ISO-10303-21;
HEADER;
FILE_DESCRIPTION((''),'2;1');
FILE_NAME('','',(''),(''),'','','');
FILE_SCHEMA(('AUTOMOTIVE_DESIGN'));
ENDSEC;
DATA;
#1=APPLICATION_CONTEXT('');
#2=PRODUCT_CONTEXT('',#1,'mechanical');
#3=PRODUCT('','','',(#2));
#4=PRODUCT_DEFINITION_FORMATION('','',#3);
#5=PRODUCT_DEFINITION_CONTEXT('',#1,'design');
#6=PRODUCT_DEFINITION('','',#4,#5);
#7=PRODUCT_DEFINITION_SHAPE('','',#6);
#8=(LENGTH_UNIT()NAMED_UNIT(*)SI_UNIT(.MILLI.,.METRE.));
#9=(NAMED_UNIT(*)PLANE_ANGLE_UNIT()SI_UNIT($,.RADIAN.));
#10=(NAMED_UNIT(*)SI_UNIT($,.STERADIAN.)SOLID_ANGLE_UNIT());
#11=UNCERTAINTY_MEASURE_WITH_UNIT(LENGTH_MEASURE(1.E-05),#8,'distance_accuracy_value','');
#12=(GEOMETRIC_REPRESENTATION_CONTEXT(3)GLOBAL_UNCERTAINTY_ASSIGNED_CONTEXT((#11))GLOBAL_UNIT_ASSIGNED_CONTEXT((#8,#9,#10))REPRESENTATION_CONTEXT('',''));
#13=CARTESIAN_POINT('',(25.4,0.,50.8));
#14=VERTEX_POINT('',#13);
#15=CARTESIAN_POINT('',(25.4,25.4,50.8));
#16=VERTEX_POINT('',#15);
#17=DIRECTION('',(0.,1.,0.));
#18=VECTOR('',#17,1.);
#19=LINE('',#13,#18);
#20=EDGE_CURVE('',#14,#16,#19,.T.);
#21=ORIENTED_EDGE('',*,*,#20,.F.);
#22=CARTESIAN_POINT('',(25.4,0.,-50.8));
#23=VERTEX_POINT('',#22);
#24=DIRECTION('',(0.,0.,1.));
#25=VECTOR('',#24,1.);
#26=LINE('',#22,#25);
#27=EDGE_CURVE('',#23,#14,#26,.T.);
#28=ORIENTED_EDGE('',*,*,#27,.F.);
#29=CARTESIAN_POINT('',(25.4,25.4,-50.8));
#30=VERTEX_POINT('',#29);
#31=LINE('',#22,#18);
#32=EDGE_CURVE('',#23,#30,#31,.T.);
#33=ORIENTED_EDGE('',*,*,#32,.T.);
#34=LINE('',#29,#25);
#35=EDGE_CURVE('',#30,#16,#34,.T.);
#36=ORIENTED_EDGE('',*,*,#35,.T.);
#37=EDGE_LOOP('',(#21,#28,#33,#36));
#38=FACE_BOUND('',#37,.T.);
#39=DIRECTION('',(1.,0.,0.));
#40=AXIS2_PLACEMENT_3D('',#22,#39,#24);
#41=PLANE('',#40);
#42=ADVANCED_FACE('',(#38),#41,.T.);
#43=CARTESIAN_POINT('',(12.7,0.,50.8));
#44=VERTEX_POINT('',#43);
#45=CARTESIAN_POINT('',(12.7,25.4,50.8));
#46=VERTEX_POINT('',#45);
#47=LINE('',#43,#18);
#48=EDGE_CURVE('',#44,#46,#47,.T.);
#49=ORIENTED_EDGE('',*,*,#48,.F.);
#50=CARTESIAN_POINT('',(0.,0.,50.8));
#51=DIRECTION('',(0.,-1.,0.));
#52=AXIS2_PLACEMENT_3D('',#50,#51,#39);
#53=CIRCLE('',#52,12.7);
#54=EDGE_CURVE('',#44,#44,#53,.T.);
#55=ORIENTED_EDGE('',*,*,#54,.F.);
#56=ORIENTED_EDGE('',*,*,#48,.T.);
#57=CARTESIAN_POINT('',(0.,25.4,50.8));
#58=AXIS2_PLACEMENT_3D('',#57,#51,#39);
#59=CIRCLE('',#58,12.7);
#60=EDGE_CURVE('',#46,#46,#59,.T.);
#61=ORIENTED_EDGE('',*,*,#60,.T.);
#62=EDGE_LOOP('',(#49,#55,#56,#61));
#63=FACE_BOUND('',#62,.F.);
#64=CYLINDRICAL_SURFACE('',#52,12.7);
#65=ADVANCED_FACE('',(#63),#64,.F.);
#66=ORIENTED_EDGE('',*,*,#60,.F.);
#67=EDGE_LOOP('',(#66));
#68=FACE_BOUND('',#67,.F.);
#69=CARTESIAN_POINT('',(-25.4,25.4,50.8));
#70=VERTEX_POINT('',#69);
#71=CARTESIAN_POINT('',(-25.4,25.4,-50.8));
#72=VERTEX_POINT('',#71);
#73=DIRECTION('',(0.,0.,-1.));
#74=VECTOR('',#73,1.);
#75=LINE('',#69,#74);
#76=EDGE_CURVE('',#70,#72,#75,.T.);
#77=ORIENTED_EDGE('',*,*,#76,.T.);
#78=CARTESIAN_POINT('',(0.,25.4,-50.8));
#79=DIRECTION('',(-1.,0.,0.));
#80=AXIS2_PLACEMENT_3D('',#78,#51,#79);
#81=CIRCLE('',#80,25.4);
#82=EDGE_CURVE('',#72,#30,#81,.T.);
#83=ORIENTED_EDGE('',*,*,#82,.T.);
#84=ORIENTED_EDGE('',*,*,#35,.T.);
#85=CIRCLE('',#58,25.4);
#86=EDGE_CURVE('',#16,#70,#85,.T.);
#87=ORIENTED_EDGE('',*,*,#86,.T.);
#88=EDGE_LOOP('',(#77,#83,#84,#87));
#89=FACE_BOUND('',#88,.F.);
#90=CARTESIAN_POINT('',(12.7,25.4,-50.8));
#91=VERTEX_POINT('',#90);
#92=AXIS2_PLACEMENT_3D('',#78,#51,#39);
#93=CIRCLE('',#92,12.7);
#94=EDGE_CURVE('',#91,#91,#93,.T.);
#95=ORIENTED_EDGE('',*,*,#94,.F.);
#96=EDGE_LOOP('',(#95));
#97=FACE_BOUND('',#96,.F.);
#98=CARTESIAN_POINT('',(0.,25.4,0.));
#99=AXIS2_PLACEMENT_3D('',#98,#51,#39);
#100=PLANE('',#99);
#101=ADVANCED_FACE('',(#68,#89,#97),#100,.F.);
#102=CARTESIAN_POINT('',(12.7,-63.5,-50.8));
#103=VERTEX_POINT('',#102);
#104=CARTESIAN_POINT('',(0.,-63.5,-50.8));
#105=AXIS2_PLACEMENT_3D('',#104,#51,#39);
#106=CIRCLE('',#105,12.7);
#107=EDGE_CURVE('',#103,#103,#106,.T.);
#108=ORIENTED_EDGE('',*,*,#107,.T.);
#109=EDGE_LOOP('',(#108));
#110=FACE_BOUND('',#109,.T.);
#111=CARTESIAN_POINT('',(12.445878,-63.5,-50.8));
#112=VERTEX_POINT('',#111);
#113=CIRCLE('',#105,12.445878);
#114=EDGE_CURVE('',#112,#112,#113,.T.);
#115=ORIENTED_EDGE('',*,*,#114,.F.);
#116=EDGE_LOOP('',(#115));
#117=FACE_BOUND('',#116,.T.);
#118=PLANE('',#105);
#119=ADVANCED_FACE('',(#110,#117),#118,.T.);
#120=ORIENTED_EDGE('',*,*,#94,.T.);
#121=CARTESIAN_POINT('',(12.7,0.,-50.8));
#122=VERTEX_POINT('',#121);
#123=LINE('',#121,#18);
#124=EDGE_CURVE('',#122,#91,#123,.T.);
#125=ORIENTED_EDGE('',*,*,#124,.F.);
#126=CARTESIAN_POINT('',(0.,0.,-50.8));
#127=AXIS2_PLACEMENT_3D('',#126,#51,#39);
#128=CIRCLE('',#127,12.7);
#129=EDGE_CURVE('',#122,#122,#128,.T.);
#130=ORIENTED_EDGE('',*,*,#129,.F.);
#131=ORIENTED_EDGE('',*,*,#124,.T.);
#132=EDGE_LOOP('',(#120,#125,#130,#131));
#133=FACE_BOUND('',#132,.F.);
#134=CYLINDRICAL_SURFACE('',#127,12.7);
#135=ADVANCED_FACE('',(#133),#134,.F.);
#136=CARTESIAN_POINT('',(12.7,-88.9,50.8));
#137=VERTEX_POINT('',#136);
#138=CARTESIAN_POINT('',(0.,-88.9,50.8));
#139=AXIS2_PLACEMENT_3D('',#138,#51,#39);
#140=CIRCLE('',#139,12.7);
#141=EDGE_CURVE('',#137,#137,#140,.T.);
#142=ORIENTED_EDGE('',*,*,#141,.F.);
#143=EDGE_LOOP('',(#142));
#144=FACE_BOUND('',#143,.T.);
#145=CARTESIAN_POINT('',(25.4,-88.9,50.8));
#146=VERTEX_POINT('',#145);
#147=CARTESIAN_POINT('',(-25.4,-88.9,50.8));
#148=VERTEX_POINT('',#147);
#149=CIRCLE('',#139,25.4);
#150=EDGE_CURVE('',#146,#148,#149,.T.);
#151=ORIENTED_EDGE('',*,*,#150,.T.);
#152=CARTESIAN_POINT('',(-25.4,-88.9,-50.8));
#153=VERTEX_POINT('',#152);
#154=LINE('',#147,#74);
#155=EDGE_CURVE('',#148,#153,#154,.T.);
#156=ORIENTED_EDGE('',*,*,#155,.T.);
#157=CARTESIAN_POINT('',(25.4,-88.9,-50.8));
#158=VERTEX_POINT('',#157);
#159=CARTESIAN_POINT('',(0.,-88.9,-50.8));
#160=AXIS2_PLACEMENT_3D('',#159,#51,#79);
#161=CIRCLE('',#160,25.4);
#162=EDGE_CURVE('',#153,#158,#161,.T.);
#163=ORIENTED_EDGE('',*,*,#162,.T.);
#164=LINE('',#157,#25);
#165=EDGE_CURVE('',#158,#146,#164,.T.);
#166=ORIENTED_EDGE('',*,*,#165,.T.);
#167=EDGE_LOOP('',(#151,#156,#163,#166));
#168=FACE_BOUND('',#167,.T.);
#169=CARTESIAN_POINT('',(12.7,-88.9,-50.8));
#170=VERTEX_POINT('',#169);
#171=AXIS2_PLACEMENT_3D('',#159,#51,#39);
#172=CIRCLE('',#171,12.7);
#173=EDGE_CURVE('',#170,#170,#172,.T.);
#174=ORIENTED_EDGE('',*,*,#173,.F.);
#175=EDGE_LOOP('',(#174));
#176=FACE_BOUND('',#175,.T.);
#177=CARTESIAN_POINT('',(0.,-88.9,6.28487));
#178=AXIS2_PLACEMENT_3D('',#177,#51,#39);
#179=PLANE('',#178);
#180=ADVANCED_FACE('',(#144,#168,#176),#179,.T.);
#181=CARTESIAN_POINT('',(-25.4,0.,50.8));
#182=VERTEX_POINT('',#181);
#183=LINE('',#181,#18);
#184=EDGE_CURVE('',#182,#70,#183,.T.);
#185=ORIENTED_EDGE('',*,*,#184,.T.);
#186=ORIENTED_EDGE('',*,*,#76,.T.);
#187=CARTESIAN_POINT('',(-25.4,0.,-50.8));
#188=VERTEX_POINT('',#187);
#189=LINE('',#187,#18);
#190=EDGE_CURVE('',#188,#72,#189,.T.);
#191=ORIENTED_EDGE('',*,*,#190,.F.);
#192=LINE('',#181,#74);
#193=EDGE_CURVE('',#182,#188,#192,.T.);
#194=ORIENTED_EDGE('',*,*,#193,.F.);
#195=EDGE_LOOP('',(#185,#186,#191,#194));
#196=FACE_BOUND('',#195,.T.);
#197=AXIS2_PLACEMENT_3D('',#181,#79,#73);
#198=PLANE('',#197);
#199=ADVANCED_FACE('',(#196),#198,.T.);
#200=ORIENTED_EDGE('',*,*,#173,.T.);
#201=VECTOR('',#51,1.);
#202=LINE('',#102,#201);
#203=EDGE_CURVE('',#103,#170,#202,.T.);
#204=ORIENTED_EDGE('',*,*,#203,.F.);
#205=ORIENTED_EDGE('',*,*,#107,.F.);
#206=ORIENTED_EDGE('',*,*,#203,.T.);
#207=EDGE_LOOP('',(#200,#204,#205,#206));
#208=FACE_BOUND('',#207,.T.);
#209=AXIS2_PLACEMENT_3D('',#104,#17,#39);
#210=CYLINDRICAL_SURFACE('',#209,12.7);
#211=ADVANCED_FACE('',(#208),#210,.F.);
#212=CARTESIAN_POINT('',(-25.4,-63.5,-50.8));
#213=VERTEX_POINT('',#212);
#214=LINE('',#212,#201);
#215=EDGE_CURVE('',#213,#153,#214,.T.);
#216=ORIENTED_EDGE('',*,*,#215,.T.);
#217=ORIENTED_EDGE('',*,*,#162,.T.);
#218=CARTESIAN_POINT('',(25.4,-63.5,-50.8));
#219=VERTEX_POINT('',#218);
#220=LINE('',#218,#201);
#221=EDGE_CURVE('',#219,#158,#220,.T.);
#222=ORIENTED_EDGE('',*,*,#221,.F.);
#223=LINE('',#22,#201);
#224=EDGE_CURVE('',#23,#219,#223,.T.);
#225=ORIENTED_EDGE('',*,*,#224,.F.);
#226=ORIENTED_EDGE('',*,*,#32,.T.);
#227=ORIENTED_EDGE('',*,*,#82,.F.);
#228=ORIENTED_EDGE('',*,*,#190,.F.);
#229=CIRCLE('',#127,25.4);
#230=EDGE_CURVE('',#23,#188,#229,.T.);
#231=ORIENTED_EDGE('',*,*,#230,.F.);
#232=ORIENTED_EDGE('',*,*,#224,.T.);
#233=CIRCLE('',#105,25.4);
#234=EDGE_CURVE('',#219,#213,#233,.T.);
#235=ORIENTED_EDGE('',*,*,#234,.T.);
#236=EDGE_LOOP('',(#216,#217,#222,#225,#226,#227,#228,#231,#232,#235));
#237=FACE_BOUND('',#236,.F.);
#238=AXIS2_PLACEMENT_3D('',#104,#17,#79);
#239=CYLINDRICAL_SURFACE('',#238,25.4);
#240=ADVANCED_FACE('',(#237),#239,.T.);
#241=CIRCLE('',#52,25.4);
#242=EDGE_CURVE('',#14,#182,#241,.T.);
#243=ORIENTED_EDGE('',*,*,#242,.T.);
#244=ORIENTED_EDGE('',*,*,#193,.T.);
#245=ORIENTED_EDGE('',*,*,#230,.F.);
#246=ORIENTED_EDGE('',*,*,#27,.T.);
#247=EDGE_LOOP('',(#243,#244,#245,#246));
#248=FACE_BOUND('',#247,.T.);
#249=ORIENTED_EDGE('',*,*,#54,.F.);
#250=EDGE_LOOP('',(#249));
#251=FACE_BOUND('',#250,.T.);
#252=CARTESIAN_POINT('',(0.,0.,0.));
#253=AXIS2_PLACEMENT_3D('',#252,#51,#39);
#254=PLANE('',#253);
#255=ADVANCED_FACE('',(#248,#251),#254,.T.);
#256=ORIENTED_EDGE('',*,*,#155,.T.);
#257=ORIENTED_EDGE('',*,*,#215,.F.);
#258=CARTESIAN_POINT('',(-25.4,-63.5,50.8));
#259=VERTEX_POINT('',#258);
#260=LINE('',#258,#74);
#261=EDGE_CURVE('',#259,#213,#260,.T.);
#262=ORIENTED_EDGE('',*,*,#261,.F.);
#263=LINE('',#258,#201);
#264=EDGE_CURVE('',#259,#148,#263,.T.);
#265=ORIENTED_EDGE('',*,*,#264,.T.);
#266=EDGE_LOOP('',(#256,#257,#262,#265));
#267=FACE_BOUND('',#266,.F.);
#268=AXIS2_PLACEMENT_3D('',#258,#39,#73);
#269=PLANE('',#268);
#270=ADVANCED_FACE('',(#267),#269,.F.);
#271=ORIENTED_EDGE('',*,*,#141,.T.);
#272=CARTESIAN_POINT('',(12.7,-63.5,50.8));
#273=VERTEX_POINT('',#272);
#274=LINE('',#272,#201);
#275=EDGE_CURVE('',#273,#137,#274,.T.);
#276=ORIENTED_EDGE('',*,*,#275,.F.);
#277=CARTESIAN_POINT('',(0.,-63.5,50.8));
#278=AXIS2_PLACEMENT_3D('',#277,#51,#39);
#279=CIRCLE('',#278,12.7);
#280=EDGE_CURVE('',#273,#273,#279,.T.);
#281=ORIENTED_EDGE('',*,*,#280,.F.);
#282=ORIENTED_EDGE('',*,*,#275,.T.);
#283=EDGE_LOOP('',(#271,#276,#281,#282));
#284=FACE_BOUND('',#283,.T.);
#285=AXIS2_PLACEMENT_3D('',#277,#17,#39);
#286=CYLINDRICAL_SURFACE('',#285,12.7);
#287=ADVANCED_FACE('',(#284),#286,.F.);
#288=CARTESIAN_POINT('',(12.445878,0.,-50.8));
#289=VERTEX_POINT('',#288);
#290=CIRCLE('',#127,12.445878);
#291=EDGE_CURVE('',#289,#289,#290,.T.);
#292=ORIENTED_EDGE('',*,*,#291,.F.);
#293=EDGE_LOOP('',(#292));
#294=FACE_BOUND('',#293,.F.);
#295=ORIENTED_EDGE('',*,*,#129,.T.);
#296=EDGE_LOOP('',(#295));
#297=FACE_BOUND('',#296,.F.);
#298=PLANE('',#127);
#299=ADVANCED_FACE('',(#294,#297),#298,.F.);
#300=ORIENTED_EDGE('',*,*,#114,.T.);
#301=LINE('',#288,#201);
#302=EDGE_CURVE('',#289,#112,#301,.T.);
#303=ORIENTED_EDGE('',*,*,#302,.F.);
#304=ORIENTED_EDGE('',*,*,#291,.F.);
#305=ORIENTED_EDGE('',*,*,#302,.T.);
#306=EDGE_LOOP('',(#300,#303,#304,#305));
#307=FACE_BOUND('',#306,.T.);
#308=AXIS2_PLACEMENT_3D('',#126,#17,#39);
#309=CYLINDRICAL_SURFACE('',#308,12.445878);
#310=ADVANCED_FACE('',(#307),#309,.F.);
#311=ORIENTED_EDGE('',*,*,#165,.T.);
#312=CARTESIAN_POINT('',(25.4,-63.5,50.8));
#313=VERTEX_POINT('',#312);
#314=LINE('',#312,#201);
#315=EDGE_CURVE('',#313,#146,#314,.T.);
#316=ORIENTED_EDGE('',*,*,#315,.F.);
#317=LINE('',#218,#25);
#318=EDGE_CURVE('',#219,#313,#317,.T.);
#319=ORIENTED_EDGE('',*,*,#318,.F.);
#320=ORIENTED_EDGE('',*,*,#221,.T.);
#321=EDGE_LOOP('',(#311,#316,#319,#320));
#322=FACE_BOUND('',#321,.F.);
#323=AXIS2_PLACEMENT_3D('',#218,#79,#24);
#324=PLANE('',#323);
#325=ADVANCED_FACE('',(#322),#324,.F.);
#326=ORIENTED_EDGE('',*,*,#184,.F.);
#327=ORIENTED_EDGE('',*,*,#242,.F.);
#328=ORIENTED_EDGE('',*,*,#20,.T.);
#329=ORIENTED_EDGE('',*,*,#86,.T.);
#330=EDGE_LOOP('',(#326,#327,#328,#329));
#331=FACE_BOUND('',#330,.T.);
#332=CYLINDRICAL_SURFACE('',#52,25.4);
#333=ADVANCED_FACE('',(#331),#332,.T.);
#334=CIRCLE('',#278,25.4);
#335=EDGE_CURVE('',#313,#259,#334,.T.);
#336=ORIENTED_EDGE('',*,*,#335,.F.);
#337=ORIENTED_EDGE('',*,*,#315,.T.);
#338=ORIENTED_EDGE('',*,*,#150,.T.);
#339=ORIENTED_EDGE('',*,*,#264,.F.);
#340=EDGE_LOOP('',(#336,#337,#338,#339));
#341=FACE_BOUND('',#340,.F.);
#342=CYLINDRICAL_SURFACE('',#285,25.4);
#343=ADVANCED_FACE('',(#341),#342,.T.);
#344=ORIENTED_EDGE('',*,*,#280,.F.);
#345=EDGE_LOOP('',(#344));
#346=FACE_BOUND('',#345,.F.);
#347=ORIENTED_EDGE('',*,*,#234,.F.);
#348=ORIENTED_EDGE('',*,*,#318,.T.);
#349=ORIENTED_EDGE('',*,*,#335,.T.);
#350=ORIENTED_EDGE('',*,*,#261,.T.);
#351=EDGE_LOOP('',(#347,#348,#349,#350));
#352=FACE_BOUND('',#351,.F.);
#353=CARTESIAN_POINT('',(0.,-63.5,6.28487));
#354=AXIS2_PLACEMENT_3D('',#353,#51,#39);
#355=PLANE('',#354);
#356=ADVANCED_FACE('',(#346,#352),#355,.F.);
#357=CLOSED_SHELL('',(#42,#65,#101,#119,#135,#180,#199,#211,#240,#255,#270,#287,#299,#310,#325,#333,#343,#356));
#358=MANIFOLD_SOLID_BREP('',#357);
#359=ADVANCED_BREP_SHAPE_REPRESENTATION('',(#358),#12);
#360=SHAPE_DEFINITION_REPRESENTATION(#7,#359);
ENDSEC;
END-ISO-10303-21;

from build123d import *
from build123d import SkipClean  # not in build123d's __all__

# Parameters (mm, degrees)
F0_R     = 12.7
F1_DEPTH = 25.4
F2_R     = 25.4
F2_R_2   = 12.4458783194
F3_DEPTH = 63.5
F4_R     = 12.7
F5_DEPTH = 25.4


# Not quite as in the source:
# - after a boolean that leaves OpenCascade's solid faulty, fix() repairs it


with BuildPart() as f1:
    # F0 (on Front) → F1 (new body)
    with BuildSketch(Plane.XZ):
        with BuildLine():
            ThreePointArc((-25.4, -50.8), (0, -76.2), (25.4, -50.8))
            Line((25.4, -50.8), (25.4, 50.8))
            ThreePointArc((25.4, 50.8), (0, 76.2), (-25.4, 50.8))
            Line((-25.4, 50.8), (-25.4, -50.8))
        make_face()
        with Locations((0, -50.8)):
            Circle(F0_R, mode=Mode.SUBTRACT)
        with Locations((0, 50.8)):
            Circle(F0_R, mode=Mode.SUBTRACT)
    extrude(amount=-F1_DEPTH)

    # F2 (on face) → F3 (join)
    with BuildSketch(Plane.XZ):
        with Locations((0, -50.8)):
            Circle(F2_R)
        with Locations((0, -50.8)):
            Circle(F2_R_2, mode=Mode.SUBTRACT)
    with SkipClean():  # cleaning this boolean's faces spoils the solid; the shape is the same uncleaned
        extrude(amount=F3_DEPTH)

    # F4 (on face) → F5 (join)
    with BuildSketch(Plane.XZ.offset(63.5)):
        with BuildLine():
            Line((-25.4, 50.8), (-25.4, -50.8))
            ThreePointArc((-25.4, -50.8), (0, -25.4), (25.4, -50.8))
            Line((25.4, -50.8), (25.4, 50.8))
            ThreePointArc((25.4, 50.8), (0, 76.2), (-25.4, 50.8))
        make_face()
        with Locations((0, 50.8)):
            Circle(F4_R, mode=Mode.SUBTRACT)
        with BuildLine():
            ThreePointArc((25.4, -50.8), (0, -25.4), (-25.4, -50.8))
            ThreePointArc((-25.4, -50.8), (0, -76.2), (25.4, -50.8))
        make_face()
        with Locations((0, -50.8)):
            Circle(F4_R, mode=Mode.SUBTRACT)
    extrude(amount=F5_DEPTH)

    add(f1.part.fix(), mode=Mode.REPLACE)


solid = f1.part
